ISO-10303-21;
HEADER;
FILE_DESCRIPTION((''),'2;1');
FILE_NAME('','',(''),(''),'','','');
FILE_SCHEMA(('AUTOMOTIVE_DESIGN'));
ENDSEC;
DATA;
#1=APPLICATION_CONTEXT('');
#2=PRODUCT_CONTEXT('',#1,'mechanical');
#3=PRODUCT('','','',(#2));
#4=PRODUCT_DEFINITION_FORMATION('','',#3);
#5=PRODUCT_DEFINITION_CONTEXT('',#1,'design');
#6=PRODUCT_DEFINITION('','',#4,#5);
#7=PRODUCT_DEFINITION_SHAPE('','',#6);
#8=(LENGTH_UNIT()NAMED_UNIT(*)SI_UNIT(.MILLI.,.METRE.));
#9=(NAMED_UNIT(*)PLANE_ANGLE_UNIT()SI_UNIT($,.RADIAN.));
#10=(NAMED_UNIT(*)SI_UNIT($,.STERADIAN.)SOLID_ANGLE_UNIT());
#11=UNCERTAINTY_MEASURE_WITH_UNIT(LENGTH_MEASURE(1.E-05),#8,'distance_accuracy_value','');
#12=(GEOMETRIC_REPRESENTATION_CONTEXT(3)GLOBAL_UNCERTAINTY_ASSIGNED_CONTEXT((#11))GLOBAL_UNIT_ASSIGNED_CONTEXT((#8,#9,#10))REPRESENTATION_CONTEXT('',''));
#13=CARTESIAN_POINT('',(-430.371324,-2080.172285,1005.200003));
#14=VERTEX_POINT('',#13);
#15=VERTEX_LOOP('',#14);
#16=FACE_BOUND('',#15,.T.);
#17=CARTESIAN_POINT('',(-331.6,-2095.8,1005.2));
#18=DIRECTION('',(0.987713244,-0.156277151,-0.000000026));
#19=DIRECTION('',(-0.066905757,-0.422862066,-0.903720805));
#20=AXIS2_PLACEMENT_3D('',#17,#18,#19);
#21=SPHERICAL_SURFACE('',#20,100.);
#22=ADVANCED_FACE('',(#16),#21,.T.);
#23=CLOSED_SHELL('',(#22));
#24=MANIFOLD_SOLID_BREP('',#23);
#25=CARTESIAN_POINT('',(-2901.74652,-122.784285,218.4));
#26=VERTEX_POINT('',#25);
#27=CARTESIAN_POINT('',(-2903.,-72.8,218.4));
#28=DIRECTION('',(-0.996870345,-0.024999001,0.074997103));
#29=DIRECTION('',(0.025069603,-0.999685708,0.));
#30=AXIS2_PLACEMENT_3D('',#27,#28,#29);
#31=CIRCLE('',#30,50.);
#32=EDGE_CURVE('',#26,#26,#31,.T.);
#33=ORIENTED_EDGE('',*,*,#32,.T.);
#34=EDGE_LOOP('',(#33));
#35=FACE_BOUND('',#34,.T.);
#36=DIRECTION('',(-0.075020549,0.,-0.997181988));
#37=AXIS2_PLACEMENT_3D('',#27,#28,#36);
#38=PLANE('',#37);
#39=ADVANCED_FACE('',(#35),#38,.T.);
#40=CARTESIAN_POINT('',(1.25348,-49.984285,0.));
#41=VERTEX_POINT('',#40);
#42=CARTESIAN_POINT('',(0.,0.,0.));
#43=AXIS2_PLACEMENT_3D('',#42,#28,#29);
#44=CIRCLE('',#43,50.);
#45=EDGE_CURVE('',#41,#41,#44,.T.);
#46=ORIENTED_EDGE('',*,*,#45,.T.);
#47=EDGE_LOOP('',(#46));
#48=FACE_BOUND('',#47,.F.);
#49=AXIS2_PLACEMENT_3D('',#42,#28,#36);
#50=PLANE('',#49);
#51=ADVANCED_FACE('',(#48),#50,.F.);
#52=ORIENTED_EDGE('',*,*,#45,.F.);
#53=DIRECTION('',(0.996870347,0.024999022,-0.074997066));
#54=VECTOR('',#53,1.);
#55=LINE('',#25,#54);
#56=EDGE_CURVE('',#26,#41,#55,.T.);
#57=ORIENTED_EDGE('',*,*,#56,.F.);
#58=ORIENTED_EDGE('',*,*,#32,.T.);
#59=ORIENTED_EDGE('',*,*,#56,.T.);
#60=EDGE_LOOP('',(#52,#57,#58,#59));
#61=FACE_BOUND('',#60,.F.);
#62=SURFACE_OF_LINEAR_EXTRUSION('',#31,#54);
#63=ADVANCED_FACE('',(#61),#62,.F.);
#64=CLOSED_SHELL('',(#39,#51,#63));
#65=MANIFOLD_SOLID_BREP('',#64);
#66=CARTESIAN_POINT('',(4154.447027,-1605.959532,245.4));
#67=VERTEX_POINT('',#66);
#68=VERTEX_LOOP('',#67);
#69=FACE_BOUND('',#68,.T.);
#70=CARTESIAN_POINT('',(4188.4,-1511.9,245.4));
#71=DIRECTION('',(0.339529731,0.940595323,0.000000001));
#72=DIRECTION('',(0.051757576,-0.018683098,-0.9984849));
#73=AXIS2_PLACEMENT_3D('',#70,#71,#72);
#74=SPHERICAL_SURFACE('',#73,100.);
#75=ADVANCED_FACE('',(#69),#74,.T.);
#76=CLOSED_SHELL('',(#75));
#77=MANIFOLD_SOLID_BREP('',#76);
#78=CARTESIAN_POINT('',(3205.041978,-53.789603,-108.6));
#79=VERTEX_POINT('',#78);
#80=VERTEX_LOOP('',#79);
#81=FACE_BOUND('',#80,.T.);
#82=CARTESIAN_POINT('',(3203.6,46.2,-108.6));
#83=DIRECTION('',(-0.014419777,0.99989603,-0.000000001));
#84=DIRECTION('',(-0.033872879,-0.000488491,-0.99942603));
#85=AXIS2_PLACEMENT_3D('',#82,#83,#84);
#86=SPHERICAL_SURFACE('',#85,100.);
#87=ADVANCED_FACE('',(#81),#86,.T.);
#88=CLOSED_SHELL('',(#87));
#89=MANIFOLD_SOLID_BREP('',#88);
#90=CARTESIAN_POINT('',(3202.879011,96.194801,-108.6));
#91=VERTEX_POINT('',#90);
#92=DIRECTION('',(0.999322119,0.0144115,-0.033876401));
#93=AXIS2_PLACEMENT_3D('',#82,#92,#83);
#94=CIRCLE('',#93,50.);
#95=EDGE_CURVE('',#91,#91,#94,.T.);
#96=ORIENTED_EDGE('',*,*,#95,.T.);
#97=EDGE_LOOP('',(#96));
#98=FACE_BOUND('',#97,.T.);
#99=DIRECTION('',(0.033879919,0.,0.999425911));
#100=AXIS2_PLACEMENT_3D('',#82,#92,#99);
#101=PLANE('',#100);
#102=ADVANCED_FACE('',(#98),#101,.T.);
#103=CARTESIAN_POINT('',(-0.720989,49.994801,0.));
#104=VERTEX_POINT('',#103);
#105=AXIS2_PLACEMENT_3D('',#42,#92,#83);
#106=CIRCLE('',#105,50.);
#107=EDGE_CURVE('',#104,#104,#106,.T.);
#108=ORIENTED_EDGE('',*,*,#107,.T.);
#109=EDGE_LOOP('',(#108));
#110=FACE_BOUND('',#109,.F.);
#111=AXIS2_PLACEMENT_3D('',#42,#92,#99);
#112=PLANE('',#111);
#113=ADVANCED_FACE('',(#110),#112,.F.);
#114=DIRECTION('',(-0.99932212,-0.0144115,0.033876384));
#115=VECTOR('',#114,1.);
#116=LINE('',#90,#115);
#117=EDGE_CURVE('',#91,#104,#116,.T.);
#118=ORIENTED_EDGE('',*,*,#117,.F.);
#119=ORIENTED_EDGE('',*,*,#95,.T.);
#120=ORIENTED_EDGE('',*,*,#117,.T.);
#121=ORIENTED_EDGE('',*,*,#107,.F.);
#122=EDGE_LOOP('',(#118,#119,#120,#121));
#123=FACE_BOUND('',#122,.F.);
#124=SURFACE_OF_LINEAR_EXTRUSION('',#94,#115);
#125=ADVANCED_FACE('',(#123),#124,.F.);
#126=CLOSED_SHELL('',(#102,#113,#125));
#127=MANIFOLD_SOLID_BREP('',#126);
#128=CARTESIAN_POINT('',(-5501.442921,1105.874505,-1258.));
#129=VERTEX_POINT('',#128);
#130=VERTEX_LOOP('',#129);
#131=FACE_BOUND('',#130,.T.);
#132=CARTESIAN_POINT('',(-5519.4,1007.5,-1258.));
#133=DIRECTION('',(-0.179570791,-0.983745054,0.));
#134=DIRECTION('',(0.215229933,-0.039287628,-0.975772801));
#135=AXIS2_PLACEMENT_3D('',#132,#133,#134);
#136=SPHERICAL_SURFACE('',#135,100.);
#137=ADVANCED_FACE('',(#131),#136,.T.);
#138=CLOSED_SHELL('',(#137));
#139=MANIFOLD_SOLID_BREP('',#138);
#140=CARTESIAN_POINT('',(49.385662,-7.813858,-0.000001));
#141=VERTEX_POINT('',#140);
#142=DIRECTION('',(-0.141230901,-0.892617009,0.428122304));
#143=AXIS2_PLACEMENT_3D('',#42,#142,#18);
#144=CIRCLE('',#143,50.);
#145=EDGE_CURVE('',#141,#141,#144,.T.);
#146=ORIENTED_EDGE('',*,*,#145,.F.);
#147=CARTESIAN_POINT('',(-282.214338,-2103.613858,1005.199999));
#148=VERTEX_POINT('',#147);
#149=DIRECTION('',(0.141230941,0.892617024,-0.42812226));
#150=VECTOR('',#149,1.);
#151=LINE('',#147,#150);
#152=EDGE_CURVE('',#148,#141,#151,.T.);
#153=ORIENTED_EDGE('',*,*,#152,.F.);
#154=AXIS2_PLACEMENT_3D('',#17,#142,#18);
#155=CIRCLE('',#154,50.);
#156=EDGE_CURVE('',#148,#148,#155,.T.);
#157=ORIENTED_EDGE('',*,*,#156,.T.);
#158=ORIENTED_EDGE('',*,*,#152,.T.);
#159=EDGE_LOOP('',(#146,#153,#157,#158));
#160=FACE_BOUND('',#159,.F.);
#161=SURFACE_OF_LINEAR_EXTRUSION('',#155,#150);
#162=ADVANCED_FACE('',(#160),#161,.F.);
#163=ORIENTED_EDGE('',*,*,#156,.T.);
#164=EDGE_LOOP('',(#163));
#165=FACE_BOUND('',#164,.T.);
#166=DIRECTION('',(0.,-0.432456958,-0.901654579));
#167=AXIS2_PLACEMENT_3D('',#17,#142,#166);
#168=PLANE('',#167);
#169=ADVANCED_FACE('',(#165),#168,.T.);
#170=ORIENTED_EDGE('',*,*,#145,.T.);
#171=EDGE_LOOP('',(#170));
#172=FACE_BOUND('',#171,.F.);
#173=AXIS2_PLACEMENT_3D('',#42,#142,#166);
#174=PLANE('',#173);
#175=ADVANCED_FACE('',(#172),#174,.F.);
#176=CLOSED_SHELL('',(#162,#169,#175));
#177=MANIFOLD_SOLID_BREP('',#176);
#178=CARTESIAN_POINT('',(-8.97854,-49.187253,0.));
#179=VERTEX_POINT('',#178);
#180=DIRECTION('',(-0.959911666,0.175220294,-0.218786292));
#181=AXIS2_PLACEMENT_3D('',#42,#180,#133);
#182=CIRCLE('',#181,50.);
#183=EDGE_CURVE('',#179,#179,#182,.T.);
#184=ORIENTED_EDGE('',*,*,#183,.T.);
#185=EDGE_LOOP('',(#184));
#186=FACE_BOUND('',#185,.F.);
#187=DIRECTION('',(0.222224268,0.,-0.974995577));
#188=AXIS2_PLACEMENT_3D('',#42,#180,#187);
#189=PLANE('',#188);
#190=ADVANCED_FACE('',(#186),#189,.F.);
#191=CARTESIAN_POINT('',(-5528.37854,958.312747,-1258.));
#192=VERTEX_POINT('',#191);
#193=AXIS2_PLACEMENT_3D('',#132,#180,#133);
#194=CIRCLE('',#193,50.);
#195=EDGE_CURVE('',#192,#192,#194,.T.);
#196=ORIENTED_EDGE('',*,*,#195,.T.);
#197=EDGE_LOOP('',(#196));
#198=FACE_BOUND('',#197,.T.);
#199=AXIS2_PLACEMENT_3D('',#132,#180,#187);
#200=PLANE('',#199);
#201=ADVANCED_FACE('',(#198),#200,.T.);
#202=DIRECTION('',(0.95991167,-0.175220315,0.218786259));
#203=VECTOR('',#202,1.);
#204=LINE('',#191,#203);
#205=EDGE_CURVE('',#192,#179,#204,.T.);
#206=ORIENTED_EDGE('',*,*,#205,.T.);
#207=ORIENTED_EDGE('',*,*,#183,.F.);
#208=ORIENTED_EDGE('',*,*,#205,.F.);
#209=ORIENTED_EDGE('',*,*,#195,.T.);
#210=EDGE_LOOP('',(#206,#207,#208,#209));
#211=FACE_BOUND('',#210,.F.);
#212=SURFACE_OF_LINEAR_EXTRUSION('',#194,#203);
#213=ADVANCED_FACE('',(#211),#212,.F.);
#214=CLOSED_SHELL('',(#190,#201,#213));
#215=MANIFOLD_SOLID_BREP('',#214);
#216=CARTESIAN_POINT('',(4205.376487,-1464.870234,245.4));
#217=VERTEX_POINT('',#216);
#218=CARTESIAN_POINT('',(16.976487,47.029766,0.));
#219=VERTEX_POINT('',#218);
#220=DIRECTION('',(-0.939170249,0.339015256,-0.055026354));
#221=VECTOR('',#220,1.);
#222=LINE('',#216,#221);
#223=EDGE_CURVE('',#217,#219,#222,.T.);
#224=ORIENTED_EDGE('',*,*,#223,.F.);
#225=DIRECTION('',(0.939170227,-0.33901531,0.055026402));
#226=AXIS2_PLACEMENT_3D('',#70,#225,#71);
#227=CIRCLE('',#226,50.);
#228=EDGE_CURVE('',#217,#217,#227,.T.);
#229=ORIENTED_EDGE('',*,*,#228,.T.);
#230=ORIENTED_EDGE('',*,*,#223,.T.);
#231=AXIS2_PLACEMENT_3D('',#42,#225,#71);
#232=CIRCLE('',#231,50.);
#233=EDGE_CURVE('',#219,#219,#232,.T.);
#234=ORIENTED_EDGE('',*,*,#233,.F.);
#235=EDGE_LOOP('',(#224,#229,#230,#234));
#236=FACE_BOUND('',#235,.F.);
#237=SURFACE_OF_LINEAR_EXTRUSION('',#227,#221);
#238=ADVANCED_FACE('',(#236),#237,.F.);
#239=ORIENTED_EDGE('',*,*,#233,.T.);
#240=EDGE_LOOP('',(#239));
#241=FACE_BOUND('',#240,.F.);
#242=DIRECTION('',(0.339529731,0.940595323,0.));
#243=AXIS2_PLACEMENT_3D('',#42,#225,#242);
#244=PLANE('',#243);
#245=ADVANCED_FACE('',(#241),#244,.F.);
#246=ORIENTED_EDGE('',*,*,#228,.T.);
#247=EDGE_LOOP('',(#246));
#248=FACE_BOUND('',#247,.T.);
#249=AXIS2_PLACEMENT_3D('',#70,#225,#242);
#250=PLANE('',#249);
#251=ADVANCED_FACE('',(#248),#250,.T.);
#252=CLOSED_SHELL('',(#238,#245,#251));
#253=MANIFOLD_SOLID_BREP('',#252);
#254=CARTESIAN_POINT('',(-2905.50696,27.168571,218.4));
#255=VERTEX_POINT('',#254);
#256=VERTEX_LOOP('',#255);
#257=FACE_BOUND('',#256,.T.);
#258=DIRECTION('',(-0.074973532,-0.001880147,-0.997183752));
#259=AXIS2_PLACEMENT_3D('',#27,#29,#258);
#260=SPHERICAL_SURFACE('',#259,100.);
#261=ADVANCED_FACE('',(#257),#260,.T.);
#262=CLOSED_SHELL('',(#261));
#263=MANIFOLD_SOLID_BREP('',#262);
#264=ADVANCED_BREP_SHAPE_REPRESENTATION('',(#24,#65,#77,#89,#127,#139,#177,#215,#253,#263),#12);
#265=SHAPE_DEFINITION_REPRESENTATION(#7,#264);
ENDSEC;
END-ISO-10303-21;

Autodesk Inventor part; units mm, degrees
ref_plane "Dyad1 plane" through (-2903, -72.8, 218.4) normal (-0.9968703, -0.024999, 0.0749971) x (0.0250696, -0.9996857, 0)
sketch "Sketch3" plane through (-2903, -72.8, 218.4) normal (-0.9968703, -0.024999, 0.0749971) x (0.0250696, -0.9996857, 0)
  circle A0 centre (0, 0) radius 50
  point P0 (0, 0)
  dimension "d16" = 50
sketch3d "import_point_3Dsketch"
  line L0 (-2903, -72.8, 218.4) -> (0, 0, 0)
sweep "Dyad1 rod" add profiles "Sketch3" path "import_point_3Dsketch"
sketch "Sketch2" plane through (-2903, -72.8, 218.4) normal (-0.9968703, -0.024999, 0.0749971) x (0.0250696, -0.9996857, 0)
  circle A0 centre (0, 0) radius 100
  line L0 (100, 0) -> (-100, 0)
  point P0 (0, 0)
  dimension "d17" = 100
revolve "Dyad1 joint" add sketch "Sketch2" angle 360 about axis through (-2900.493, -172.7686, 218.4) along (-0.0250696, 0.9996857, 0) separate body picked at (-20.1483, -40.7644) contours A0 L0
ref_plane "Dyad2 plane" through (-331.6, -2095.8, 1005.2) normal (-0.1412309, -0.892617, 0.4281223) x (0.9877132, -0.1562772, 0)
sketch "Sketch4" plane through (-331.6, -2095.8, 1005.2) normal (-0.1412309, -0.892617, 0.4281223) x (0.9877132, -0.1562772, 0)
  circle A0 centre (0, 0) radius 50
  dimension "d14" = 50
sketch3d "import_point_3Dsketch for Dyad2 rod"
  line L0 (-331.6, -2095.8, 1005.2) -> (0, 0, 0)
sweep "Dyad2 rod" add profiles "Sketch4" path "import_point_3Dsketch for Dyad2 rod" separate body
sketch "Sketch5" plane through (-331.6, -2095.8, 1005.2) normal (-0.1412309, -0.892617, 0.4281223) x (0.9877132, -0.1562772, 0)
  circle A0 centre (0, 0) radius 100
  line L0 (100, 0) -> (-100, 0)
  dimension "d11" = 100
revolve "Dyad2 joint" add sketch "Sketch5" angle 360 about axis through (-232.8287, -2111.4277, 1005.2) along (-0.9877132, 0.1562772, 0) picked at (-20.1483, -40.7644) bodies 2 contours A0 L0
ref_plane "Dyad3 plane" through (-5519.4, 1007.5, -1258) normal (-0.9599117, 0.1752203, -0.2187863) x (-0.1795708, -0.9837451, 0)
sketch "Sketch6" plane through (-5519.4, 1007.5, -1258) normal (-0.9599117, 0.1752203, -0.2187863) x (-0.1795708, -0.9837451, 0)
  circle A0 centre (0, 0) radius 50
  point P0 (0, 0)
  dimension "d18" = 50
sketch3d "import_point_3Dsketch for Dyad3 rod"
  line L0 (-5519.4, 1007.5, -1258) -> (0, 0, 0)
sweep "Dyad3 rod" add profiles "Sketch6" path "import_point_3Dsketch for Dyad3 rod" separate body
sketch "Sketch7" plane through (-5519.4, 1007.5, -1258) normal (-0.9599117, 0.1752203, -0.2187863) x (-0.1795708, -0.9837451, 0)
  circle A0 centre (0, 0) radius 100
  line L0 (100, 0) -> (-100, 0)
  point P0 (0, 0)
  dimension "d21" = 100
revolve "Dyad3 joint" add sketch "Sketch7" angle 360 about axis through (-5537.3571, 909.1255, -1258) along (0.1795708, 0.9837451, 0) picked at (-20.1483, -40.7644) bodies 2 contours A0 L0
ref_plane "Dyad4 plane" through (4188.4, -1511.9, 245.4) normal (0.9391702, -0.3390153, 0.0550264) x (0.3395297, 0.9405953, 0)
sketch "Sketch8" plane through (4188.4, -1511.9, 245.4) normal (0.9391702, -0.3390153, 0.0550264) x (0.3395297, 0.9405953, 0)
  circle A0 centre (0, 0) radius 50
  point P0 (0, 0)
  dimension "d23" = 50
sketch3d "import_point_3Dsketch for Dyad4 rod"
  line L0 (4188.4, -1511.9, 245.4) -> (0, 0, 0)
sweep "Dyad4 rod" add profiles "Sketch8" path "import_point_3Dsketch for Dyad4 rod" separate body
sketch "Sketch9" plane through (4188.4, -1511.9, 245.4) normal (0.9391702, -0.3390153, 0.0550264) x (0.3395297, 0.9405953, 0)
  circle A0 centre (0, 0) radius 100
  line L0 (100, 0) -> (-100, 0)
  point P0 (0, 0)
  dimension "d26" = 100
revolve "Dyad4 joint" add sketch "Sketch9" angle 360 about axis through (4222.353, -1417.8405, 245.4) along (-0.3395297, -0.9405953, 0) picked at (-20.1483, -40.7644) bodies 2 contours A0 L0
ref_plane "Dyad5 plane" through (3203.6, 46.2, -108.6) normal (0.9993221, 0.0144115, -0.0338764) x (-0.0144198, 0.999896, 0)
sketch "Sketch10" plane through (3203.6, 46.2, -108.6) normal (0.9993221, 0.0144115, -0.0338764) x (-0.0144198, 0.999896, 0)
  circle A0 centre (0, 0) radius 50
  point P0 (0, 0)
  dimension "d28" = 50
sketch3d "import_point_3Dsketch for Dyad5 rod"
  line L0 (3203.6, 46.2, -108.6) -> (0, 0, 0)
sweep "Dyad5 rod" add profiles "Sketch10" path "import_point_3Dsketch for Dyad5 rod" separate body
sketch "Sketch11" plane through (3203.6, 46.2, -108.6) normal (0.9993221, 0.0144115, -0.0338764) x (-0.0144198, 0.999896, 0)
  circle A0 centre (0, 0) radius 100
  line L0 (100, 0) -> (-100, 0)
  point P0 (0, 0)
  dimension "d31" = 100
revolve "Dyad5 joint" add sketch "Sketch11" angle 360 about axis through (3202.158, 146.1896, -108.6) along (0.0144198, -0.999896, 0) picked at (-20.1483, -40.7644) bodies 2 contours A0 L0
equation "\"d16\" = rod_radius"
equation "\"d17\" = S_radius"
equation "\"d14\" = rod_radius"
equation "\"d11\" = S_radius"
equation "\"d18\" = rod_radius"
equation "\"d21\" = S_radius"
equation "\"d23\" = rod_radius"
equation "\"d26\" = S_radius"
equation "\"d28\" = rod_radius"
equation "\"d31\" = S_radius"
equation "\"rod_radius\" = 50"
equation "\"S_radius\" = 2 * rod_radius"
properties part number "Coupler"
